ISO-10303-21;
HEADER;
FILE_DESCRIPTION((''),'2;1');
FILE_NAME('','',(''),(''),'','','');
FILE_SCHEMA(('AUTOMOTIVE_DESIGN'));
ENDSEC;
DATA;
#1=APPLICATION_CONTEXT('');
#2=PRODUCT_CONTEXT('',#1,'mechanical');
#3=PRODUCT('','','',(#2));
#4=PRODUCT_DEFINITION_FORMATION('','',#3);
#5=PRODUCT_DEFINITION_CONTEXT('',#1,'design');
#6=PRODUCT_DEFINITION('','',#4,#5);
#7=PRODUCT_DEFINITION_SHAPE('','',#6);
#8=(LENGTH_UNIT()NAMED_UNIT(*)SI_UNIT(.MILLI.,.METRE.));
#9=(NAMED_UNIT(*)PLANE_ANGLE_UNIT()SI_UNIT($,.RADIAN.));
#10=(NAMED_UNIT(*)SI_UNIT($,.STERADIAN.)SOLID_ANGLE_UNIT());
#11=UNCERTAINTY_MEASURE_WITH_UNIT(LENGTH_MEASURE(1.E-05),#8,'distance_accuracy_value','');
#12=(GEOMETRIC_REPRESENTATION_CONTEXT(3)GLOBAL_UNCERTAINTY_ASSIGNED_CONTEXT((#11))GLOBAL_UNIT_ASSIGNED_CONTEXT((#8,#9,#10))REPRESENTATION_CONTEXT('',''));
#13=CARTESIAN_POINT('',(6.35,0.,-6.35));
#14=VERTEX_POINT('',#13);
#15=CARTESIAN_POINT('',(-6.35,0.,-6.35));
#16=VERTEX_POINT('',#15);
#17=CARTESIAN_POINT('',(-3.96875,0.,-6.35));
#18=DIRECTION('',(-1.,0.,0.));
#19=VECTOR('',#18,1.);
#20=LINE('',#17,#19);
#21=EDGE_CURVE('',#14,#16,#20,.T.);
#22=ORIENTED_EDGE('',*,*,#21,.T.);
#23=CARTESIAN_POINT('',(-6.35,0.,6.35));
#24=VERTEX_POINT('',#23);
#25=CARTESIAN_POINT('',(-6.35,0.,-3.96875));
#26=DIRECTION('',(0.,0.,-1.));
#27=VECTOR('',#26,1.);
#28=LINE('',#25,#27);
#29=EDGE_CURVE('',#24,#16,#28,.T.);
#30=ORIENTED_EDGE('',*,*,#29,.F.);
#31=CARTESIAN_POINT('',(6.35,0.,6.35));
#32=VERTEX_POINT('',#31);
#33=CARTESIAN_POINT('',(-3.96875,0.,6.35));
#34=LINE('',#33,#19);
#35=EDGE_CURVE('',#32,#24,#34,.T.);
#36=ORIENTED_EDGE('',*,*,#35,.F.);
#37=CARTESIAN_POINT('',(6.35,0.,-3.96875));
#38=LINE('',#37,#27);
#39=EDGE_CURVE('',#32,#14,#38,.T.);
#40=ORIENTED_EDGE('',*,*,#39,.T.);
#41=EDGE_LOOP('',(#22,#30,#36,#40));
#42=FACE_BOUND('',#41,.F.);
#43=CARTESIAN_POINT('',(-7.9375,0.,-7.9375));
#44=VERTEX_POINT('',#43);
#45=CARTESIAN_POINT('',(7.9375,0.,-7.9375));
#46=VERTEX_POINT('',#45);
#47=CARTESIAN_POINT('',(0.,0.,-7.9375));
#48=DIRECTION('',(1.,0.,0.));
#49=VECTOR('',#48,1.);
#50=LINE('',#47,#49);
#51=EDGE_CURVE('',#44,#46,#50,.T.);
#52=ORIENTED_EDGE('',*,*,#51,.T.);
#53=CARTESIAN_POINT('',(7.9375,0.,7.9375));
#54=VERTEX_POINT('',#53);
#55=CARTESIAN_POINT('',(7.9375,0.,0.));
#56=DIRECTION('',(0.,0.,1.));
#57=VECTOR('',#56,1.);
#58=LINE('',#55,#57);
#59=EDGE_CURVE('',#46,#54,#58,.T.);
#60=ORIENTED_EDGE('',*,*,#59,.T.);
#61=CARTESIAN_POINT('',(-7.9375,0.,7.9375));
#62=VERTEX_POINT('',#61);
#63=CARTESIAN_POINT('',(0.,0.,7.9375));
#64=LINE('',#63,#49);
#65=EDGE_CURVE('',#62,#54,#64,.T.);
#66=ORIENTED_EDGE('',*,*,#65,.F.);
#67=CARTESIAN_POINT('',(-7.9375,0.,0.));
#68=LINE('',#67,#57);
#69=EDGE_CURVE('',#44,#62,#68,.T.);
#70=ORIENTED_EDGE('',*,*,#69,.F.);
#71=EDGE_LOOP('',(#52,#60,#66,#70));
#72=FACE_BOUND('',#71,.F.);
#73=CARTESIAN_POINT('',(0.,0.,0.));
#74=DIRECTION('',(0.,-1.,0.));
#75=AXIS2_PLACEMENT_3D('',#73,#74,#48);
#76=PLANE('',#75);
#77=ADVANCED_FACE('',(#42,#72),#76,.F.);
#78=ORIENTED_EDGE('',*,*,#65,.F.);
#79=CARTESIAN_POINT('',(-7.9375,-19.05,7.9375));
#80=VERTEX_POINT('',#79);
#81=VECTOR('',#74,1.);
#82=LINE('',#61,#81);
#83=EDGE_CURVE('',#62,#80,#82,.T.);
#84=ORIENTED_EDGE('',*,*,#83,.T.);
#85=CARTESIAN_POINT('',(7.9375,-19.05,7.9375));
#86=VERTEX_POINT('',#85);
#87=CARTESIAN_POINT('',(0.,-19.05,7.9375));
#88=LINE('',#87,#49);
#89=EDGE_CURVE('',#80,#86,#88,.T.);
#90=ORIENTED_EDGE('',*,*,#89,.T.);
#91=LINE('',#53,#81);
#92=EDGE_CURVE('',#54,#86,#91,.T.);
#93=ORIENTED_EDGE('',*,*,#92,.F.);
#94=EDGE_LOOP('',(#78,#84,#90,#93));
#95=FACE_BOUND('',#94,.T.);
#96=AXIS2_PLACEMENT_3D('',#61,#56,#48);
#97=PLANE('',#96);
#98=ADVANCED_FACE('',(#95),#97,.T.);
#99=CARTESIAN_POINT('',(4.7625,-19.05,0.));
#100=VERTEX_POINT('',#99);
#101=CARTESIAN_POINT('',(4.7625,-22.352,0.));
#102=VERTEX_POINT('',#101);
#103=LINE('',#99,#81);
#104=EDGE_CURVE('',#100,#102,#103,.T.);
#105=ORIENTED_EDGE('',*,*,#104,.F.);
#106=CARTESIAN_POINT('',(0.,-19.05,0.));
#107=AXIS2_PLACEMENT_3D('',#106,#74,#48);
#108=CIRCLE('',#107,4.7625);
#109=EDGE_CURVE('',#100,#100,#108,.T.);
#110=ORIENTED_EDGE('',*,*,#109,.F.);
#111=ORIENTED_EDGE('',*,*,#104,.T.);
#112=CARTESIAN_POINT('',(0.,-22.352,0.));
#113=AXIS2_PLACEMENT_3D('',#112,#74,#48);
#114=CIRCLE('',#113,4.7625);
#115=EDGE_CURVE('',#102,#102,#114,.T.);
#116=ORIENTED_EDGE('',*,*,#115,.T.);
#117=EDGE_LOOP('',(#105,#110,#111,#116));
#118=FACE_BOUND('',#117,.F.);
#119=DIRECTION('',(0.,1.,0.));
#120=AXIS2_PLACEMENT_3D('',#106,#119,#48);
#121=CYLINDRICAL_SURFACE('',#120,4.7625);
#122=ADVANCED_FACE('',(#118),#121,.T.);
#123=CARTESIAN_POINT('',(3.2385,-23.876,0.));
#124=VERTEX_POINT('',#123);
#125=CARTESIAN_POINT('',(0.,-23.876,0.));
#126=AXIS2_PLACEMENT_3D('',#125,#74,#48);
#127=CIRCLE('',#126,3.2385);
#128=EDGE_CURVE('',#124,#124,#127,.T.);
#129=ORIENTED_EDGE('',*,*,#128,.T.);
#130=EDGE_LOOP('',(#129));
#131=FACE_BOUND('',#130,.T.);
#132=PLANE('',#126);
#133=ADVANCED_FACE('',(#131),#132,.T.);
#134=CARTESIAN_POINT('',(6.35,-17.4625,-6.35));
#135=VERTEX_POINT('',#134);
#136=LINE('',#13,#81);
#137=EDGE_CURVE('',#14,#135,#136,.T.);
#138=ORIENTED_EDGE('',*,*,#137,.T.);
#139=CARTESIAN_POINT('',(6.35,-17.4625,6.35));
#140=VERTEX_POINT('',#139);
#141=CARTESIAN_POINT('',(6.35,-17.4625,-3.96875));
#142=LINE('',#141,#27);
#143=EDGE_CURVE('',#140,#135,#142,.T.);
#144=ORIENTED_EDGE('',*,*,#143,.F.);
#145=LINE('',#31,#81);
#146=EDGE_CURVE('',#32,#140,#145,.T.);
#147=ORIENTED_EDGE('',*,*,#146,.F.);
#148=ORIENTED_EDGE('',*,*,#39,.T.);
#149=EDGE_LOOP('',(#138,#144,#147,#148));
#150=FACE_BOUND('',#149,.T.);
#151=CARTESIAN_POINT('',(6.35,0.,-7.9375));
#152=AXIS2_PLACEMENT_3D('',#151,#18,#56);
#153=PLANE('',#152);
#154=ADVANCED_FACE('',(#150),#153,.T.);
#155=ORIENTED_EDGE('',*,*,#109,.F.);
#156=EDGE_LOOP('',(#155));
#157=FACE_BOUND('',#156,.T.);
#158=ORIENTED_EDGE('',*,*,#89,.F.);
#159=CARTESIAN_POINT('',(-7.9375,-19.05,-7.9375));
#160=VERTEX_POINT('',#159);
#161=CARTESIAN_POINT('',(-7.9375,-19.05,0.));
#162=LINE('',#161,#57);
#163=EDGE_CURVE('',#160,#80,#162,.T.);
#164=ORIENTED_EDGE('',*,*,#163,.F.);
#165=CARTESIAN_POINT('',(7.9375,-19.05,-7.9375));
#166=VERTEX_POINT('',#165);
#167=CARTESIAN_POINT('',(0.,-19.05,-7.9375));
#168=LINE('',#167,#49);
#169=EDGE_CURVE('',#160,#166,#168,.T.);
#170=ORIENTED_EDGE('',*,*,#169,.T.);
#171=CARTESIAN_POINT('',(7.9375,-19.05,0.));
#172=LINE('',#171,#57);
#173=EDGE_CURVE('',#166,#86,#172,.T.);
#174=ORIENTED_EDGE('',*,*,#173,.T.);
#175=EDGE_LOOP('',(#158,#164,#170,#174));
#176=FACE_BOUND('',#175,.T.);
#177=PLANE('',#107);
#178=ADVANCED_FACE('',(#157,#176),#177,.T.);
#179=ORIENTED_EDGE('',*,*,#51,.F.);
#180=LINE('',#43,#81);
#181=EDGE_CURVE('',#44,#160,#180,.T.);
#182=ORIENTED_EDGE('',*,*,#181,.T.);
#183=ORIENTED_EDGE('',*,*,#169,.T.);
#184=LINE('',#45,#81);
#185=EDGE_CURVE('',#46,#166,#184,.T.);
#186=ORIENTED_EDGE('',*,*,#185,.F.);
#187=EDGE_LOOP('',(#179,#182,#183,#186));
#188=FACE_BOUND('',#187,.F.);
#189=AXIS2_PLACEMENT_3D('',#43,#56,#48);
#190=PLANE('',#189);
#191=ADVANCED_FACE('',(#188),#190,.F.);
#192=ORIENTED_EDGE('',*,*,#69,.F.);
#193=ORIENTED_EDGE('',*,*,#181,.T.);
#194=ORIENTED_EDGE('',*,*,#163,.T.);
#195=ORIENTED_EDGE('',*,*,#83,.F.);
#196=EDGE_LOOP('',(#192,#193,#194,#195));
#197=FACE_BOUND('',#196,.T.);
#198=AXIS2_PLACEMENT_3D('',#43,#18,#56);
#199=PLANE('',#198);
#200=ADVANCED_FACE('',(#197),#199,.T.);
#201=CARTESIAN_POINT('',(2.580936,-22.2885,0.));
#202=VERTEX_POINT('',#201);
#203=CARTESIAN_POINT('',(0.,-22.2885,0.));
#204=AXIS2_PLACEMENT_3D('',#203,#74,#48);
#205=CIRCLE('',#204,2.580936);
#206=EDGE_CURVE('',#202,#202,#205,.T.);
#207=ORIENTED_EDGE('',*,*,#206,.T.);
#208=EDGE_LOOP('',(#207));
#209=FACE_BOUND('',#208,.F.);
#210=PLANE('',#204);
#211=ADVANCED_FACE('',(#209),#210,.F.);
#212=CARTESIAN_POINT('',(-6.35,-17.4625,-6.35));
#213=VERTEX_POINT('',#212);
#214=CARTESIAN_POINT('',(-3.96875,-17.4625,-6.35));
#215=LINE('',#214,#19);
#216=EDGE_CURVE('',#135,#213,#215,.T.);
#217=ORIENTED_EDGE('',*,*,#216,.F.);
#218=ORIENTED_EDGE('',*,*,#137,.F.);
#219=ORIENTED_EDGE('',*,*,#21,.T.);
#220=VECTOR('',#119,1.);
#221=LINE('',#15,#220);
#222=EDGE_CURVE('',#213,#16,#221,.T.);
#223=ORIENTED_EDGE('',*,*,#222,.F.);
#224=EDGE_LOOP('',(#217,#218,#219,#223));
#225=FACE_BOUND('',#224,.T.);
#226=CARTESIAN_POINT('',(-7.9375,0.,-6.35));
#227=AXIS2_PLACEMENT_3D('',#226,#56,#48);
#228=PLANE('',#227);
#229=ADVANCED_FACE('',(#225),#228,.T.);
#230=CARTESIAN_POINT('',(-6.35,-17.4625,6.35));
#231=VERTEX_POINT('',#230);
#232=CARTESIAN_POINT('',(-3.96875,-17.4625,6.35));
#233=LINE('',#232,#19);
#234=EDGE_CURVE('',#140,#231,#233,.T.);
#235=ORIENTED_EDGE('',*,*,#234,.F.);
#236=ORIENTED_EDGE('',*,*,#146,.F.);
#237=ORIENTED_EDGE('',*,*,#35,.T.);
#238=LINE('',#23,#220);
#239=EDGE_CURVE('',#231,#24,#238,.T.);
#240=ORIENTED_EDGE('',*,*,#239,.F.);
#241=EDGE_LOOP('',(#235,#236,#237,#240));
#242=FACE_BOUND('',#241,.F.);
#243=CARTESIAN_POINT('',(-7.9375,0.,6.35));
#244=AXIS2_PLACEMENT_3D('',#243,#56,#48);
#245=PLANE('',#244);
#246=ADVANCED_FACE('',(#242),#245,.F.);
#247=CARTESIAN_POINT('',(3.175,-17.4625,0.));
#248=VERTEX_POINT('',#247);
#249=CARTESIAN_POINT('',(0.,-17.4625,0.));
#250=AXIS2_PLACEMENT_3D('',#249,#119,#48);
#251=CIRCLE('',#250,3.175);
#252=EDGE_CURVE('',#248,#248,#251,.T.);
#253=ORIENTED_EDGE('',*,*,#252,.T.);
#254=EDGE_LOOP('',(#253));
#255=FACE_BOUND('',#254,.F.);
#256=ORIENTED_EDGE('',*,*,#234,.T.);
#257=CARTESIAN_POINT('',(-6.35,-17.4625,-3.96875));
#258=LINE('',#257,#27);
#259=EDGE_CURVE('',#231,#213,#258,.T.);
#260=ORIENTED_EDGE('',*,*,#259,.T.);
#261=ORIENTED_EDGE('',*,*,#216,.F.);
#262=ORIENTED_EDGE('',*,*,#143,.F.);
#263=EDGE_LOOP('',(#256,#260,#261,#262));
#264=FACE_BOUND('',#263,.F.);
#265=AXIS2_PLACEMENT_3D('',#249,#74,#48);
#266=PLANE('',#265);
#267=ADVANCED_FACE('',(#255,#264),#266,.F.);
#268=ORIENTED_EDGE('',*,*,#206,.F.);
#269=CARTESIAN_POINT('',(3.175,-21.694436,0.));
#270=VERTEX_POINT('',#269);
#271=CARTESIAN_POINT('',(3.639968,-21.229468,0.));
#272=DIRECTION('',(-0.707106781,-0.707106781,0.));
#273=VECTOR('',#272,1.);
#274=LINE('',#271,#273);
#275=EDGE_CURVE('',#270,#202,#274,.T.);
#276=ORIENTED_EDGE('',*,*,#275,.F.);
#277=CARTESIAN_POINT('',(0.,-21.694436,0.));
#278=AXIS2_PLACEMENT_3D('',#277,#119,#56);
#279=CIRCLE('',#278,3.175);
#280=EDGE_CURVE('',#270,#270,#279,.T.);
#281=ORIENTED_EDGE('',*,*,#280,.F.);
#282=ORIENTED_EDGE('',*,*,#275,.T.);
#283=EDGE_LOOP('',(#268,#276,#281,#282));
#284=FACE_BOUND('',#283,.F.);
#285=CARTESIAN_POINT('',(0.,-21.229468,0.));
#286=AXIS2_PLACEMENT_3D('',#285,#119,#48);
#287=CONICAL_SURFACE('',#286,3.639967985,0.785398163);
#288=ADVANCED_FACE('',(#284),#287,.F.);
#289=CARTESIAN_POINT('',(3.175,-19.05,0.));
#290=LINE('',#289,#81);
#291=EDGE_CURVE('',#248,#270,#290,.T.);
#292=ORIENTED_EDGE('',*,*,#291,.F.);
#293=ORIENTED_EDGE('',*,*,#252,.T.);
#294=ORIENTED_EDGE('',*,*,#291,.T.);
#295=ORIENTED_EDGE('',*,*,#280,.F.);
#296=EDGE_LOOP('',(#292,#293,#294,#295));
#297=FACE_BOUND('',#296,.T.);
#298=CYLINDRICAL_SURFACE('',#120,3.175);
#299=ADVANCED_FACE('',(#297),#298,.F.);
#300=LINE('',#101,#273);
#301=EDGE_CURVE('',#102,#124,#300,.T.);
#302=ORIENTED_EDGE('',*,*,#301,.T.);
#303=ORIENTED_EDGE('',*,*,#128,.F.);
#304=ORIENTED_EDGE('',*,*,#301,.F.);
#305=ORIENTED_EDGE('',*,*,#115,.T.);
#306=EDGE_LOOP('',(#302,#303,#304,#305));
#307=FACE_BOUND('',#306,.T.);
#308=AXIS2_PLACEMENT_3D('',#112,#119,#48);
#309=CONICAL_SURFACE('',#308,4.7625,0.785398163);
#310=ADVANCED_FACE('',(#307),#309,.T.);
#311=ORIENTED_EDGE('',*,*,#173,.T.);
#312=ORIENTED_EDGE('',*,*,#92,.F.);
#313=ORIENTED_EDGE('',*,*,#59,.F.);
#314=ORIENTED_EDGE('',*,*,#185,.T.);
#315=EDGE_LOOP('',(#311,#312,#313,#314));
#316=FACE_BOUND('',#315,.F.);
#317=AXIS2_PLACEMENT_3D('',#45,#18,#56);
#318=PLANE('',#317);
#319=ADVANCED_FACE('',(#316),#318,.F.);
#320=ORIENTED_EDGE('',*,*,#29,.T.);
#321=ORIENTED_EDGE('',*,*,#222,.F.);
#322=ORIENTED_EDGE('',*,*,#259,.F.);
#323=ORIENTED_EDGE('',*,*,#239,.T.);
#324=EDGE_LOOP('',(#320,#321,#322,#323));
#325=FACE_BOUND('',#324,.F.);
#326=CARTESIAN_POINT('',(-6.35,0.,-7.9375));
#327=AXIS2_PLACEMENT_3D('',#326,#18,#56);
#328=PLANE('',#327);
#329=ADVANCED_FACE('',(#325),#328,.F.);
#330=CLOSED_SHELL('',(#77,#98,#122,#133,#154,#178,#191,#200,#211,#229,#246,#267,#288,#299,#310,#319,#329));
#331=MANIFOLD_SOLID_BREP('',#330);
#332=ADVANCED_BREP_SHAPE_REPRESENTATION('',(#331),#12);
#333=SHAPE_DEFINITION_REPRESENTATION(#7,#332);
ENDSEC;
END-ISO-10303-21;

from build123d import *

# Parameters (mm, degrees)
F0_W     = 15.875
F0_H     = 15.875
F1_DEPTH = 19.05
F2_R     = 4.7625
F3_DEPTH = 4.826
F4_SIZE  = 1.524
F5_T     = -1.5875


with BuildPart() as f1:
    # F0 (on Front) → F1 (new body)
    with BuildSketch(Plane.XZ):
        Rectangle(F0_W, F0_H)
    extrude(amount=F1_DEPTH)

    # F2 (on face) → F3 (join)
    with BuildSketch(Plane.XZ.offset(19.05)):
        Circle(F2_R)
    extrude(amount=F3_DEPTH)

    # F4
    f4_edges = [f1.edges().sort_by_distance(p)[0] for p in [
        (-4.7625, -23.876, 0),
    ]]
    chamfer(f4_edges, length=F4_SIZE)

    # F5
    f5_openings = [f1.faces().sort_by_distance(p)[0] for p in [
        (0, 0, 0),
    ]]
    offset(amount=F5_T, openings=f5_openings, kind=Kind.INTERSECTION)


solid = f1.part
